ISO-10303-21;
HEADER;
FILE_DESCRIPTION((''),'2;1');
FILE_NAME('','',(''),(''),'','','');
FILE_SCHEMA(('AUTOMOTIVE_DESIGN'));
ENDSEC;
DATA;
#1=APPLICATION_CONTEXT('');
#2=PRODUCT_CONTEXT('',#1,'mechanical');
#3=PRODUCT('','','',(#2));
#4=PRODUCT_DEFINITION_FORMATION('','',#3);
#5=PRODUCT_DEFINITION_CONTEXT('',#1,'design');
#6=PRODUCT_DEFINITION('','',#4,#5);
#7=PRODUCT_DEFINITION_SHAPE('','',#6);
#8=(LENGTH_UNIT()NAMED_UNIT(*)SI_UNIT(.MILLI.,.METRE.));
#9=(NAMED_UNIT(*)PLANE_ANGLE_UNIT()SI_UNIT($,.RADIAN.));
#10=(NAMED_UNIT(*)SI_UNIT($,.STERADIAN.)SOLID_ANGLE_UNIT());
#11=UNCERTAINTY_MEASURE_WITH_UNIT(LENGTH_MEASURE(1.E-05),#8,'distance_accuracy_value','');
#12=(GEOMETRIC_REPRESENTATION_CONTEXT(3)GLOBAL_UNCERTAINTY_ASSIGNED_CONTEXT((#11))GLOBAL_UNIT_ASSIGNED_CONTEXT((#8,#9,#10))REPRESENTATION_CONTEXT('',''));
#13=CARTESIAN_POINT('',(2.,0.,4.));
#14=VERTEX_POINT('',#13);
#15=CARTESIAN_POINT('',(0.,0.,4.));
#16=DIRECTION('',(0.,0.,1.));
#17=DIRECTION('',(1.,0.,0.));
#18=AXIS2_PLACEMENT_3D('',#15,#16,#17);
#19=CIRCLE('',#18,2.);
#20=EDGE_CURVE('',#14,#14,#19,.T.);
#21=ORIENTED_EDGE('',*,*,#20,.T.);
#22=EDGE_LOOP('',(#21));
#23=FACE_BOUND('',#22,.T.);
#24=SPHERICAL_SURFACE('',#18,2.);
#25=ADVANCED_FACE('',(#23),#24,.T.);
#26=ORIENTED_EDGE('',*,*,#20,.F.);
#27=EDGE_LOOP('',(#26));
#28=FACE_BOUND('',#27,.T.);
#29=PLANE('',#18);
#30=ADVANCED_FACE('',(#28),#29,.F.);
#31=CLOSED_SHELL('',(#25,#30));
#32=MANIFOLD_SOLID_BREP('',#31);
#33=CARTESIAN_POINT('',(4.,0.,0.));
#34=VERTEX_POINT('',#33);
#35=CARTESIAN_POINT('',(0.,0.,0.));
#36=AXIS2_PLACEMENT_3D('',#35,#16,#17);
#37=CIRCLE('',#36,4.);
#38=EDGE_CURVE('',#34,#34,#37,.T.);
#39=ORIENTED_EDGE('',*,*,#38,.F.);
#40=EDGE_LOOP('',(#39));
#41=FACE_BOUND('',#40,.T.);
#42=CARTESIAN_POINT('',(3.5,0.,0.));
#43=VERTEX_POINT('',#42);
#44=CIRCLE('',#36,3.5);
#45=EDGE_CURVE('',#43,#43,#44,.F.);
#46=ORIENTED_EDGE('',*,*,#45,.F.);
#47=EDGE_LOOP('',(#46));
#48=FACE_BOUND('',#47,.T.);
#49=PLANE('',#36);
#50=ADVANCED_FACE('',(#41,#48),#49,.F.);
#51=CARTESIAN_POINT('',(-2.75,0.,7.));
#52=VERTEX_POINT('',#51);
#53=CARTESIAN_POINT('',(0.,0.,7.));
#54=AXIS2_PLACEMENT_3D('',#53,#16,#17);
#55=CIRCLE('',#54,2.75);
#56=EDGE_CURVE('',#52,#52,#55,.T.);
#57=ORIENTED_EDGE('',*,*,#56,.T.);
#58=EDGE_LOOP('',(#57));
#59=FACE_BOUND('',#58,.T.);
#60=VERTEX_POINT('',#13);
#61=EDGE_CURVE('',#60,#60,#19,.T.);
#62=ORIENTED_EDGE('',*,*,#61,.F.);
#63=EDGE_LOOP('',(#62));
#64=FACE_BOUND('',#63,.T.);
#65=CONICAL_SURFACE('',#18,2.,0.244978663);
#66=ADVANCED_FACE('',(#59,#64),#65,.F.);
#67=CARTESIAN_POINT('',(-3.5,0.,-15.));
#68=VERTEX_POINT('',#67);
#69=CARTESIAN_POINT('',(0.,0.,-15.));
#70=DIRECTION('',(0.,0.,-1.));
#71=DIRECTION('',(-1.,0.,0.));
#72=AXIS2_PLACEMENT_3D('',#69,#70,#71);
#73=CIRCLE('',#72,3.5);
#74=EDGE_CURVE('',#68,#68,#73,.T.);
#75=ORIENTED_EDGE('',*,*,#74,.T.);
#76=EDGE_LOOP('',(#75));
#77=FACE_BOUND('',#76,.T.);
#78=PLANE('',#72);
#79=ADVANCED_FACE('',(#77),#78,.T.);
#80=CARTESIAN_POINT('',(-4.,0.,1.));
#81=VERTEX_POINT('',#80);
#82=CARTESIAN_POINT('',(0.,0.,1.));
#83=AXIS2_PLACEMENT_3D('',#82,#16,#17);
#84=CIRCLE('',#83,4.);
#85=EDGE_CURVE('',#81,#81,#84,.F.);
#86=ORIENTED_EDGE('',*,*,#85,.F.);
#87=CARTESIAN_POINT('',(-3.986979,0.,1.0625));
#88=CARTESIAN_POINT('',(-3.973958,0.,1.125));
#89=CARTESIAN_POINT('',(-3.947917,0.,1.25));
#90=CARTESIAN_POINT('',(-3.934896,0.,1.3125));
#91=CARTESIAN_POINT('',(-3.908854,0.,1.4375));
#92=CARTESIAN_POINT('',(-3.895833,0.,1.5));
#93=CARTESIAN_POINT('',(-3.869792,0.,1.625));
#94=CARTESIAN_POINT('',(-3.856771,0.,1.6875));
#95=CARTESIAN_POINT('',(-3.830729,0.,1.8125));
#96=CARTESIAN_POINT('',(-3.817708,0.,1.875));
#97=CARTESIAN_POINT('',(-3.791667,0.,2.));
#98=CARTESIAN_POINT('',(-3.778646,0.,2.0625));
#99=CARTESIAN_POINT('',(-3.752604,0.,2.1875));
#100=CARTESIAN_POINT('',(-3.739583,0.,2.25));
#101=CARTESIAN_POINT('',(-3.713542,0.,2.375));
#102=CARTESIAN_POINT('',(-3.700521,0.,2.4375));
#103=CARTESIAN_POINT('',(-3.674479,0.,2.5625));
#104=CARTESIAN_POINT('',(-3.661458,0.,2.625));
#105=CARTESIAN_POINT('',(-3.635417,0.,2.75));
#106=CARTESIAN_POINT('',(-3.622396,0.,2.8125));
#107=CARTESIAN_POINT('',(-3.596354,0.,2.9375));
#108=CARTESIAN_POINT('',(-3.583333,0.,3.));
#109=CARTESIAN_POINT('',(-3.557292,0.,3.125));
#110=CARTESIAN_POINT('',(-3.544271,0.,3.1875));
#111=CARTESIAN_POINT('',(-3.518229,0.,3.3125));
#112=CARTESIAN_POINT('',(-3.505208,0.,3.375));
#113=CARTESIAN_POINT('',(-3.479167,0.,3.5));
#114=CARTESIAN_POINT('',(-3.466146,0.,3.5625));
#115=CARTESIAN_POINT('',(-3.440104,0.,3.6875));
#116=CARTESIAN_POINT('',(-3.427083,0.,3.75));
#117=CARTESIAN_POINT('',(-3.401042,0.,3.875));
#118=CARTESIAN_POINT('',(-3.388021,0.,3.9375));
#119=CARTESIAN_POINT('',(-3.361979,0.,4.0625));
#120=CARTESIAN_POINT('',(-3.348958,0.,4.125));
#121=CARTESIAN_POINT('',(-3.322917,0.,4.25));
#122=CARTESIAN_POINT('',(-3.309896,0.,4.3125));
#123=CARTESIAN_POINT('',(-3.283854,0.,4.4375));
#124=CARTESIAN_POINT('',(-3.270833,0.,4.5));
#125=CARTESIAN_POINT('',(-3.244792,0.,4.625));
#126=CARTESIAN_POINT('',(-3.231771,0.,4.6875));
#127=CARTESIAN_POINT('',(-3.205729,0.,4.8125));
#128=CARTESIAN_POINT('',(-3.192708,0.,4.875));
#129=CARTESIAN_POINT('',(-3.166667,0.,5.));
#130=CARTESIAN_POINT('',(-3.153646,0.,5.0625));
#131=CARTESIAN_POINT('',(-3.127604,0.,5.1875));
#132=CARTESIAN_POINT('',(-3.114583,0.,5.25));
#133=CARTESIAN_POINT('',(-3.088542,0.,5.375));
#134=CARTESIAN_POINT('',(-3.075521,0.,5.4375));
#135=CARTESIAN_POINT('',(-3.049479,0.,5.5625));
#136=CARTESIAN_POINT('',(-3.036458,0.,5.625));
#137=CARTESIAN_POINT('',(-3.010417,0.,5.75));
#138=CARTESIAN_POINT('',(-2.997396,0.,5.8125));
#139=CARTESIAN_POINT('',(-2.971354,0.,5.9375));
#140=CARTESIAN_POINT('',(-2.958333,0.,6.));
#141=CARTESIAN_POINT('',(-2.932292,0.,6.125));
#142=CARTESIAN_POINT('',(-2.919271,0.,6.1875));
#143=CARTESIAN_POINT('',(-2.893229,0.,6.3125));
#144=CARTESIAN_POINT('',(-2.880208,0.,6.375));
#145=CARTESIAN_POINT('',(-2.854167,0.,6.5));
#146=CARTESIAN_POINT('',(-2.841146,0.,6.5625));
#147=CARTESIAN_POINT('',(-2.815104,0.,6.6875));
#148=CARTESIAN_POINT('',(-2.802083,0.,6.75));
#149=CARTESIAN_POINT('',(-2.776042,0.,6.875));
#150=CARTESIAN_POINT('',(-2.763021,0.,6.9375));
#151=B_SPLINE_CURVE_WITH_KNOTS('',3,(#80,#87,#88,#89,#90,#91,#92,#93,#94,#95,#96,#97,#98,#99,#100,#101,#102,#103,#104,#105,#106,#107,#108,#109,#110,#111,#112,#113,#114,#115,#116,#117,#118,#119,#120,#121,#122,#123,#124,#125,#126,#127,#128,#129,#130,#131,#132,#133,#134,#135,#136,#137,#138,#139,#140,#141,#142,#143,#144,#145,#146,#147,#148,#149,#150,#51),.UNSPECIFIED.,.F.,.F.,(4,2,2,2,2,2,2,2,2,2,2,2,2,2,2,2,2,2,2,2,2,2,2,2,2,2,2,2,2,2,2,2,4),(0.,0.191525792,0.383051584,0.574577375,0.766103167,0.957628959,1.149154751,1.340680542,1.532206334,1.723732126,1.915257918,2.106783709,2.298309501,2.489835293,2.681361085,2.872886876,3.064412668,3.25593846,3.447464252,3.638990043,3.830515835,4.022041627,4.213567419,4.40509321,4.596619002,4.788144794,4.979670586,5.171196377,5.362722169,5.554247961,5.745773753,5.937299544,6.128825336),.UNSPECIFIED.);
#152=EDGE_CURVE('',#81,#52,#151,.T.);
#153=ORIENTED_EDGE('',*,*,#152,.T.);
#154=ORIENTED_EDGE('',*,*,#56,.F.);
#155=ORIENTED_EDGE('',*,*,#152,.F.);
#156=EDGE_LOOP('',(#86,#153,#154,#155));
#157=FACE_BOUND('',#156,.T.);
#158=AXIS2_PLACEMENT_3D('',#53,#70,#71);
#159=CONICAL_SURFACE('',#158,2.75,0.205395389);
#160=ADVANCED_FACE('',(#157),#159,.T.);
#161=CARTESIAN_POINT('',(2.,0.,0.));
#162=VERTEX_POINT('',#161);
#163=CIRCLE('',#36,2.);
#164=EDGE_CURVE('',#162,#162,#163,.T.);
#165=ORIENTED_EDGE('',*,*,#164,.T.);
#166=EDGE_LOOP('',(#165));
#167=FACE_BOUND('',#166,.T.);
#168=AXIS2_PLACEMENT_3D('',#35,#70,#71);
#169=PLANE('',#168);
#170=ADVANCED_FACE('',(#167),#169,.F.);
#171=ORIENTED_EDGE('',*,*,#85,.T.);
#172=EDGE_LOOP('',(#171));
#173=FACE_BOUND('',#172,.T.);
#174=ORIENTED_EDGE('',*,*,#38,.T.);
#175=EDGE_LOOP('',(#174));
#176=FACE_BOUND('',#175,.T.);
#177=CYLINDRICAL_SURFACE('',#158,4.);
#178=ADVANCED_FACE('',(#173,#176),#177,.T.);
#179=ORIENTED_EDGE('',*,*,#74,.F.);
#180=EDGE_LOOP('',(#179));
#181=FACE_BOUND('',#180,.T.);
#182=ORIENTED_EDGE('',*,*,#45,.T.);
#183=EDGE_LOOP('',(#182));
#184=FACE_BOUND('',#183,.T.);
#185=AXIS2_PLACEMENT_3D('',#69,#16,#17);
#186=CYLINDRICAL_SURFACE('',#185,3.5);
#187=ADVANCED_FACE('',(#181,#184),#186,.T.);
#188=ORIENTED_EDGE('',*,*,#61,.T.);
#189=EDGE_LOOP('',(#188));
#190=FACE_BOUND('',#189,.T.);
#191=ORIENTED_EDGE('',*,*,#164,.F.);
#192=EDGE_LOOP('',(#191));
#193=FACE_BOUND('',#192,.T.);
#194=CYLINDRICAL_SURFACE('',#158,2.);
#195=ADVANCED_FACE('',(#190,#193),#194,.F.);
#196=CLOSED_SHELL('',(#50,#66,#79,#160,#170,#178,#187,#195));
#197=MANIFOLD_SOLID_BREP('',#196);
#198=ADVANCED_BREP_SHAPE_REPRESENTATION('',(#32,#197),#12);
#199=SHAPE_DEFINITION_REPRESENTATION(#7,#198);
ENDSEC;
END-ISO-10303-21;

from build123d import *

# Parameters (mm, degrees)
ESQUISSE1_R        = 4
ESQUISSE1_R_2      = 2
BOSS_EXTRU_1_DEPTH = 7
CHANFREIN1_SIZE    = 6
CHANFREIN1_SIZE2   = 1.25
CHANFREIN2_SIZE    = 0.75
CHANFREIN2_SIZE_2  = 3
ESQUISSE4_R        = 2
BOSS_EXTRU_2_DEPTH = 2
CONG_1_R           = 2
ESQUISSE5_R        = 3.5
BOSS_EXTRU_3_DEPTH = 15


# Some blends are built 0.0001 mm under size
with BuildPart() as part:
    # Esquisse1 → Boss.-Extru.1 (new body)
    with BuildSketch(Plane.XY):
        Circle(ESQUISSE1_R)
        Circle(ESQUISSE1_R_2, mode=Mode.SUBTRACT)
    extrude(amount=BOSS_EXTRU_1_DEPTH)

    # Chanfrein1
    chanfrein1_edges = [part.edges().sort_by_distance(p)[0] for p in [
        (-4, 0, 7),
    ]]
    chanfrein1_side = [part.faces().sort_by_distance(p)[0] for p in [
        (-4, 0, 3.5),
    ]]
    chamfer(chanfrein1_edges, length=CHANFREIN1_SIZE, length2=CHANFREIN1_SIZE2, reference=chanfrein1_side[0])

    # Chanfrein2
    # the kernel refuses this chamfer: 3, 0.75 mm, written as the material it takes off along each edge
    with BuildSketch(Plane(origin=(0, 0, 7), x_dir=(1, 0, 0), z_dir=(0, -1, 0))) as chanfrein2_piece_1:
        Polygon((2 + CHANFREIN2_SIZE, 0), (2, -CHANFREIN2_SIZE_2), (2, 0), align=None)
    revolve(axis=Axis((0, 0, 7), (0, 0, 1)), mode=Mode.SUBTRACT)

    # Esquisse5 → Boss.-Extru.3 (add)
    with BuildSketch(Plane(origin=(0, 0, 0), x_dir=(-1, 0, 0), z_dir=(0, 0, -1))):
        with Locations(Location((0, 0, 0), (0, 0, 180))):
            Circle(ESQUISSE5_R)
    extrude(amount=BOSS_EXTRU_3_DEPTH)


with BuildPart() as body_2:
    # Esquisse4 → Boss.-Extru.2 (new body)
    with BuildSketch(Plane.XY.offset(4)):
        Circle(ESQUISSE4_R)
    extrude(amount=BOSS_EXTRU_2_DEPTH)

    # Congé1
    cong_1_edges = [body_2.edges().sort_by_distance(p)[0] for p in [
        (-2, 0, 6),
    ]]
    fillet(cong_1_edges, radius=CONG_1_R - 0.0001)  # a hair under: the kernel refuses the full size


solid = Compound([part.part, body_2.part])
